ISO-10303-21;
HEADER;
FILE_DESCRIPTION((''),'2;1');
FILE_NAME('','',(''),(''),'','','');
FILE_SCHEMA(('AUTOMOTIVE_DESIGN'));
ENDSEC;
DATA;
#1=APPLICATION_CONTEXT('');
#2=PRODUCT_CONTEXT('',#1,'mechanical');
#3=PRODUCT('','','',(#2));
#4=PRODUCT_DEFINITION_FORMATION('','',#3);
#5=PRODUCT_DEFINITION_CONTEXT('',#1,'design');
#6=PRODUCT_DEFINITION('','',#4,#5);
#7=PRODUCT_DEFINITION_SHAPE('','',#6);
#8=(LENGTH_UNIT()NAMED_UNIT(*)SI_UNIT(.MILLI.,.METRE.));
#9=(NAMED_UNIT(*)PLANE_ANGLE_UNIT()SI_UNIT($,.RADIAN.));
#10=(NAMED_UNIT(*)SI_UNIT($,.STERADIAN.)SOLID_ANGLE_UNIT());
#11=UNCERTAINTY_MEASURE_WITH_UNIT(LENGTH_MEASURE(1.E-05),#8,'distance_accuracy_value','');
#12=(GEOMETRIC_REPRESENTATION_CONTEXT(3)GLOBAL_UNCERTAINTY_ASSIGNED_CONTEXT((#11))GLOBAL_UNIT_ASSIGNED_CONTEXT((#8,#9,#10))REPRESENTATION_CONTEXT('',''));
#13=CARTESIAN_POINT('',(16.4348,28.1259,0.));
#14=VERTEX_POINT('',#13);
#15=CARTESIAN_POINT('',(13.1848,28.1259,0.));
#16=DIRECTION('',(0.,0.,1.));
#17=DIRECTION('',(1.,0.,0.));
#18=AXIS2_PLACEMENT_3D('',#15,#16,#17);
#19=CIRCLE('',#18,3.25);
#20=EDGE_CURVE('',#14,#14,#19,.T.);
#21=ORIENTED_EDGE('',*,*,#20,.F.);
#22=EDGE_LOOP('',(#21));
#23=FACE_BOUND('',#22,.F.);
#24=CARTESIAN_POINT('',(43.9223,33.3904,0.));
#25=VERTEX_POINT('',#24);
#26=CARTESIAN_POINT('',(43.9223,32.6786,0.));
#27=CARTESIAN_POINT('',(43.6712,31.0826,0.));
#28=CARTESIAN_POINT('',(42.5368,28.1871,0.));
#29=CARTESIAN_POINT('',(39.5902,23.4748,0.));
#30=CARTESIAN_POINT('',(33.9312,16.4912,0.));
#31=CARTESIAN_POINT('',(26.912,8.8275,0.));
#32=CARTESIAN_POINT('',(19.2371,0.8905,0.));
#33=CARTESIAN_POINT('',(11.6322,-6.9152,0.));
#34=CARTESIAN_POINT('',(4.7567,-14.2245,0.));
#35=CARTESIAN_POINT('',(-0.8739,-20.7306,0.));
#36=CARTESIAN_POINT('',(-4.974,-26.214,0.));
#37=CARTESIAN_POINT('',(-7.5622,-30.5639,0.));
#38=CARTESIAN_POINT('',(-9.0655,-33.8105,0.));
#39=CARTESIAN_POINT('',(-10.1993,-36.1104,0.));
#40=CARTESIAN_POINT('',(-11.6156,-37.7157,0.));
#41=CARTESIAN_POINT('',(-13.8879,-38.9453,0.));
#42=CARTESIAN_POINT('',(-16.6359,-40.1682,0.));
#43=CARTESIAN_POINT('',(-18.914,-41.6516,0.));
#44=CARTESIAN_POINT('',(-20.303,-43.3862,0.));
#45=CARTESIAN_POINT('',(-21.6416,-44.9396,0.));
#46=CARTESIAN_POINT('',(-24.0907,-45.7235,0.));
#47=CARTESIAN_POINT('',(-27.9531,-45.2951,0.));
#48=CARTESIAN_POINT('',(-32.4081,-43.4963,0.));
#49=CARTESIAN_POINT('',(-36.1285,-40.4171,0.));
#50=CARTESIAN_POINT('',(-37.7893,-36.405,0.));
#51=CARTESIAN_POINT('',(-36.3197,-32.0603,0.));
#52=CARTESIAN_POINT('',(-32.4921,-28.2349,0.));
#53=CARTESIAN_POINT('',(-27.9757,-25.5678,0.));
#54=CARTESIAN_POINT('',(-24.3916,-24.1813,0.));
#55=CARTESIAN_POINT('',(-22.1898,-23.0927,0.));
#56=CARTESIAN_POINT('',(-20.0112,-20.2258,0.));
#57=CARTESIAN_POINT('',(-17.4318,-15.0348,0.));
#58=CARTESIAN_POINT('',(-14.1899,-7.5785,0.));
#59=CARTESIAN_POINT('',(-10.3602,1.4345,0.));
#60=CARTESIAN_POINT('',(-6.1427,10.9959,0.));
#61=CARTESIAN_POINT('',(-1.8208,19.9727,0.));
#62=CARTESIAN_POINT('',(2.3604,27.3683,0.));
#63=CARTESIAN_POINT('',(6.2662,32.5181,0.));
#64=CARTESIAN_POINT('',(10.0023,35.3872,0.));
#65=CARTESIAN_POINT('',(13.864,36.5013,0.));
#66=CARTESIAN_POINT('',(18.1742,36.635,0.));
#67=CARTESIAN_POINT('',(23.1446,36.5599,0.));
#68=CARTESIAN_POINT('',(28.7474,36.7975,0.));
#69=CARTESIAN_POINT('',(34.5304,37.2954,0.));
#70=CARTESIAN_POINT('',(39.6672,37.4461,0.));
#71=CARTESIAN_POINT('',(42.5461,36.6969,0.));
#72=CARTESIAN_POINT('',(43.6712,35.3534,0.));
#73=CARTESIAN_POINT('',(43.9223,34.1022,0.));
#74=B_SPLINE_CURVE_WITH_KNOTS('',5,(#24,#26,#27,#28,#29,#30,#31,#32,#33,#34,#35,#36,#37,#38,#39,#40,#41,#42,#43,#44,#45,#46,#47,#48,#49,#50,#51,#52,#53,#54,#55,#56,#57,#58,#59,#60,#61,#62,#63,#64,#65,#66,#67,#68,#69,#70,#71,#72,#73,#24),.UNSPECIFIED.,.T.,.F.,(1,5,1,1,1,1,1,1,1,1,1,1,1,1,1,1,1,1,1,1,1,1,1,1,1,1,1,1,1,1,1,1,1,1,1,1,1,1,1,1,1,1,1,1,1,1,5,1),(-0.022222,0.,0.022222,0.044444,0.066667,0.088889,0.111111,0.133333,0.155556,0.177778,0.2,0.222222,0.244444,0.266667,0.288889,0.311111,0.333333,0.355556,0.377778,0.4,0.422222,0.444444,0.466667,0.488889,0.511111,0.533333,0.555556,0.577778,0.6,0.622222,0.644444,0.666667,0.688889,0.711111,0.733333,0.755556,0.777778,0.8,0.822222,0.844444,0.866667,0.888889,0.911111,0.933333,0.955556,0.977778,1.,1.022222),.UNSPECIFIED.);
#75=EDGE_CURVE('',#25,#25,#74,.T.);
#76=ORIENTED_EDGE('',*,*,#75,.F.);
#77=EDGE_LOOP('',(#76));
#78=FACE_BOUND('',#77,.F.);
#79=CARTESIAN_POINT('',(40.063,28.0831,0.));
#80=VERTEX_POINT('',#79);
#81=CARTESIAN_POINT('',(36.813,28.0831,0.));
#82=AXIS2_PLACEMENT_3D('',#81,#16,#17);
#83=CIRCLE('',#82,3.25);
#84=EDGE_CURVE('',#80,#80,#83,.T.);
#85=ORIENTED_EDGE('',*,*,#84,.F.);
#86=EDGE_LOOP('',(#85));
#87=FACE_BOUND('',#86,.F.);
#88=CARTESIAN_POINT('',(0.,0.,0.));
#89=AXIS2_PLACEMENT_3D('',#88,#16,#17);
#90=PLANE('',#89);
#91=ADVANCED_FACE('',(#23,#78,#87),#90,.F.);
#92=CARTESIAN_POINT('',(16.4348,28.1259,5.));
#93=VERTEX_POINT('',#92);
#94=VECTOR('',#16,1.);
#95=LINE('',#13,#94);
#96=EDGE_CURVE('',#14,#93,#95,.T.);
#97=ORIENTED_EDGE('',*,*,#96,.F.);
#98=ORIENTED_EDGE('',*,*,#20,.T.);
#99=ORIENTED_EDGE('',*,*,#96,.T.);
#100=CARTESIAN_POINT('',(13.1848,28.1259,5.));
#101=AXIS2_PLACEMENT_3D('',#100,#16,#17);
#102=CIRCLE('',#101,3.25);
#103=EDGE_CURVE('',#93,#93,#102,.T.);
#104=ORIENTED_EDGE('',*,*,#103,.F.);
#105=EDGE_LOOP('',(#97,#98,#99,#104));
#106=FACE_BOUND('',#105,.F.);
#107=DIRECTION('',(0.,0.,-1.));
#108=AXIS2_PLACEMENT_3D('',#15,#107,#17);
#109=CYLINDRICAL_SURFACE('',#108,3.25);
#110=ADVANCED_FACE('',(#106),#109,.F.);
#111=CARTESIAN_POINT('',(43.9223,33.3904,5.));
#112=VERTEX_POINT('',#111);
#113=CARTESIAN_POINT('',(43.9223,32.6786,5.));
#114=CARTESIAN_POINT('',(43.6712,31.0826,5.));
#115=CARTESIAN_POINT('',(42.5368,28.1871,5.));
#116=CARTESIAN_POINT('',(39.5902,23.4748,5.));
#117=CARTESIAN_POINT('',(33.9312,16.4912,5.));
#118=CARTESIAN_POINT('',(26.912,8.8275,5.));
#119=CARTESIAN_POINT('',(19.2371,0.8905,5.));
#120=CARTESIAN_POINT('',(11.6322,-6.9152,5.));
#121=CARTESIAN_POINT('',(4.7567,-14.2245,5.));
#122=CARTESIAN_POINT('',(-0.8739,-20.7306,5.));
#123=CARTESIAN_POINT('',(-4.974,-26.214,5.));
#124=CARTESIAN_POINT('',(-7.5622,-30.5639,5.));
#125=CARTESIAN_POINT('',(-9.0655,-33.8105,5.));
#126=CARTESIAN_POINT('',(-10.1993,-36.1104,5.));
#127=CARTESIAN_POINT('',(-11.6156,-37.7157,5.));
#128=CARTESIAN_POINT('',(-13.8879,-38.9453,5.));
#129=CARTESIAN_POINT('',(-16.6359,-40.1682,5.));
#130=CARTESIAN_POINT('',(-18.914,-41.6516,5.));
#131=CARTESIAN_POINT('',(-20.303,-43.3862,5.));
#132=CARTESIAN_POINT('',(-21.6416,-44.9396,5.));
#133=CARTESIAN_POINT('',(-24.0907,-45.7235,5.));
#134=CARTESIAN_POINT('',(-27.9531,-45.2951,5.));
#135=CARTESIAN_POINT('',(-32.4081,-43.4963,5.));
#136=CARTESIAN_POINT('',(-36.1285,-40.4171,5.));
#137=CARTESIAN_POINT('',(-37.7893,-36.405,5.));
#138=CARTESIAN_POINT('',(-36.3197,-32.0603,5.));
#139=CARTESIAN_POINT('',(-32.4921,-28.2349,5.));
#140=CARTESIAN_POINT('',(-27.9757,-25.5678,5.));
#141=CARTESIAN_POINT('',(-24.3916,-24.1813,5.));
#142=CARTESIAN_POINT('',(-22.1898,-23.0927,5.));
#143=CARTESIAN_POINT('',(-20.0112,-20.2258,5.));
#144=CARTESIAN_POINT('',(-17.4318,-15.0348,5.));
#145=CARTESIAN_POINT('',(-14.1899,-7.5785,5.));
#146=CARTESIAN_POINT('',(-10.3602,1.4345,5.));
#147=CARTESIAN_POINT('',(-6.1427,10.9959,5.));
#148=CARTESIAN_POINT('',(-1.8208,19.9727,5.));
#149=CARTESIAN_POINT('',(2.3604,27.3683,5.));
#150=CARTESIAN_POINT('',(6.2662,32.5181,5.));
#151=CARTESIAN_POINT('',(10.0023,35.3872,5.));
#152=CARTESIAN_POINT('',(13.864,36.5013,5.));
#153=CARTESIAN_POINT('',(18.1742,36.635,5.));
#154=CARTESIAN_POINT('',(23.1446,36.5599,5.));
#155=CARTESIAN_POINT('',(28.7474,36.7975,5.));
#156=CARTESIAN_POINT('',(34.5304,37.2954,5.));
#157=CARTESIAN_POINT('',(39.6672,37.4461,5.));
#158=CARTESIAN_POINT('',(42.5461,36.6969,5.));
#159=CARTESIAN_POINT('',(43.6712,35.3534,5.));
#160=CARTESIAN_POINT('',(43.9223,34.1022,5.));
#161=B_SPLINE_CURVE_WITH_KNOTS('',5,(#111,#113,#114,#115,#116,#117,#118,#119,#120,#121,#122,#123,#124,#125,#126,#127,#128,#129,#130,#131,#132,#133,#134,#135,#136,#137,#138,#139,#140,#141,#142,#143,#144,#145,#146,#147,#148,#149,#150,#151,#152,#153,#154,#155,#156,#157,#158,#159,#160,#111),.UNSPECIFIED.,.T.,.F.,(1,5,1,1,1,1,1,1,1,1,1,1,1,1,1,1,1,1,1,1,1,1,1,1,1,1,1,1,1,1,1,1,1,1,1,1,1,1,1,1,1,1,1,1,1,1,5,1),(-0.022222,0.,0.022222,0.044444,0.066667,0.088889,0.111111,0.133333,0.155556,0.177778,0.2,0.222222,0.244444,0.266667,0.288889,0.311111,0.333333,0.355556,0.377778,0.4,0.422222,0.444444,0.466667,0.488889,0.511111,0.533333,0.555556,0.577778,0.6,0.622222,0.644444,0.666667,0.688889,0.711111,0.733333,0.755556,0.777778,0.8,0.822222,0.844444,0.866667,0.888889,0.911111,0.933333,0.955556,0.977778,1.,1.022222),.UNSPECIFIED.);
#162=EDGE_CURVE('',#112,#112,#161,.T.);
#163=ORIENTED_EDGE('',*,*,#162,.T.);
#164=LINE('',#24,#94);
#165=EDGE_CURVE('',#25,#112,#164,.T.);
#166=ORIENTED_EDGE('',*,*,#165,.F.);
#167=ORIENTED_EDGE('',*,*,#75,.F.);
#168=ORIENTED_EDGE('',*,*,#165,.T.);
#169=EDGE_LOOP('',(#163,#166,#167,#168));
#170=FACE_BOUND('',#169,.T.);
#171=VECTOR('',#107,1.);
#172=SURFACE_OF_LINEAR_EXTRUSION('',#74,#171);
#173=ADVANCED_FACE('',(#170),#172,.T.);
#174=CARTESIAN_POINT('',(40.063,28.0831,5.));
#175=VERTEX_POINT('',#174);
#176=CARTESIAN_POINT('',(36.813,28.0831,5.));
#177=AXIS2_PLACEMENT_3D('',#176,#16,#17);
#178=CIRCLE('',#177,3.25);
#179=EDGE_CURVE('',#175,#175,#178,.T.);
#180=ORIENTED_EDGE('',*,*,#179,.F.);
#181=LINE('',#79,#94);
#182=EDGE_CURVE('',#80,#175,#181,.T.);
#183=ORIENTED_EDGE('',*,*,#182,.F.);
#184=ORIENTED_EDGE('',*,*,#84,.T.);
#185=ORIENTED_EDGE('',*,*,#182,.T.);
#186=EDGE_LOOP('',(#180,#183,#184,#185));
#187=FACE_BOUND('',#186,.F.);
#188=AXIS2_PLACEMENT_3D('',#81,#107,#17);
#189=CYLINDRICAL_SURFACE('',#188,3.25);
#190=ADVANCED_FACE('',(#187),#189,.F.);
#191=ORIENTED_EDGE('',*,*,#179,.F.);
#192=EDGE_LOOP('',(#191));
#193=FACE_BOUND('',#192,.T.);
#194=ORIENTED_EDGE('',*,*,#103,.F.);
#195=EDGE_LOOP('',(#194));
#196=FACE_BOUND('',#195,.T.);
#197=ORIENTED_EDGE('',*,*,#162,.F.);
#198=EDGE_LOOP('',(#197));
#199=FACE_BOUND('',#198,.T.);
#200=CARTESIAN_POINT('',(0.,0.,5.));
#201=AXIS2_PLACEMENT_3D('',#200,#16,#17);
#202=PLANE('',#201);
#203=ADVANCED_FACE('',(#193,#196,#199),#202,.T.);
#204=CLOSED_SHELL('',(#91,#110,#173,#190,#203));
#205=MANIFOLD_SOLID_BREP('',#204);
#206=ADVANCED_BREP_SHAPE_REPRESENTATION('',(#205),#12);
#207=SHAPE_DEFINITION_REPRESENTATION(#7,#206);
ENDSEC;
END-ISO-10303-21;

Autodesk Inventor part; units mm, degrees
ref_plane "YZ Plane" through (0, 0, 0) normal (1, 0, 0) x (0, 1, 0)
ref_plane "XZ Plane" through (0, 0, 0) normal (0, 1, 0) x (-1, 0, 0)
ref_plane "XY Plane" through (0, 0, 0) normal (0, 0, 1) x (1, 0, 0)
sketch "Sketch2" plane through (0, 0, 0) normal (0, 0, 1) x (1, 0, 0)
  circle A0 centre (36.813, 28.0831) radius 3.25
  circle A1 centre (13.1848, 28.1259) radius 3.25
  spline S0 degree 5 poles (43.9223, 33.3904) (43.9223, 32.6786) (43.6712, 31.0826) (42.5368, 28.1871) (39.5902, 23.4748) (33.9312, 16.4912) (26.912, 8.8275) (19.2371, 0.8905) (11.6322, -6.9152) (4.7567, -14.2245) (-0.8739, -20.7306) (-4.974, -26.214) (-7.5622, -30.5639) (-9.0655, -33.8105) (-10.1993, -36.1104) (-11.6156, -37.7157) (-13.8879, -38.9453) (-16.6359, -40.1682) (-18.914, -41.6516) (-20.303, -43.3862) (-21.6416, -44.9396) (-24.0907, -45.7235) (-27.9531, -45.2951) (-32.4081, -43.4963) (-36.1285, -40.4171) (-37.7893, -36.405) (-36.3197, -32.0603) (-32.4921, -28.2349) (-27.9757, -25.5678) (-24.3916, -24.1813) (-22.1898, -23.0927) (-20.0112, -20.2258) (-17.4318, -15.0348) (-14.1899, -7.5785) (-10.3602, 1.4345) (-6.1427, 10.9959) (-1.8208, 19.9727) (2.3604, 27.3683) (6.2662, 32.5181) (10.0023, 35.3872) (13.864, 36.5013) (18.1742, 36.635) (23.1446, 36.5599) (28.7474, 36.7975) (34.5304, 37.2954) (39.6672, 37.4461) (42.5461, 36.6969) (43.6712, 35.3534) (43.9223, 34.1022) (43.9223, 33.3904) knots 0 0 0 0 0 0 0.022222 0.044444 0.066667 0.088889 0.111111 0.133333 0.155556 0.177778 0.2 0.222222 0.244444 0.266667 0.288889 0.311111 0.333333 0.355556 0.377778 0.4 0.422222 0.444444 0.466667 0.488889 0.511111 0.533333 0.555556 0.577778 0.6 0.622222 0.644444 0.666667 0.688889 0.711111 0.733333 0.755556 0.777778 0.8 0.822222 0.844444 0.866667 0.888889 0.911111 0.933333 0.955556 0.977778 1 1 1 1 1 1 weights 1 1 1 1 1 1 1 1 1 1 1 1 1 1 1 1 1 1 1 1 1 1 1 1 1 1 1 1 1 1 1 1 1 1 1 1 1 1 1 1 1 1 1 1 1 1 1 1 1 1
  point P0 (0, 0)
  point P1 (-101.3685, 95.1139)
  dimension "d2" = 6.5
extrude "Extrusion1" add sketch "Sketch2" along normal blind 5
equation "\"d2\" = R"
equation "\"d0\" = thickness"
equation "\"R\" = 6.5"
equation "\"thickness\" = 5"
equation "\"width\" = 6.5"
equation "\"R1\" = 9"
